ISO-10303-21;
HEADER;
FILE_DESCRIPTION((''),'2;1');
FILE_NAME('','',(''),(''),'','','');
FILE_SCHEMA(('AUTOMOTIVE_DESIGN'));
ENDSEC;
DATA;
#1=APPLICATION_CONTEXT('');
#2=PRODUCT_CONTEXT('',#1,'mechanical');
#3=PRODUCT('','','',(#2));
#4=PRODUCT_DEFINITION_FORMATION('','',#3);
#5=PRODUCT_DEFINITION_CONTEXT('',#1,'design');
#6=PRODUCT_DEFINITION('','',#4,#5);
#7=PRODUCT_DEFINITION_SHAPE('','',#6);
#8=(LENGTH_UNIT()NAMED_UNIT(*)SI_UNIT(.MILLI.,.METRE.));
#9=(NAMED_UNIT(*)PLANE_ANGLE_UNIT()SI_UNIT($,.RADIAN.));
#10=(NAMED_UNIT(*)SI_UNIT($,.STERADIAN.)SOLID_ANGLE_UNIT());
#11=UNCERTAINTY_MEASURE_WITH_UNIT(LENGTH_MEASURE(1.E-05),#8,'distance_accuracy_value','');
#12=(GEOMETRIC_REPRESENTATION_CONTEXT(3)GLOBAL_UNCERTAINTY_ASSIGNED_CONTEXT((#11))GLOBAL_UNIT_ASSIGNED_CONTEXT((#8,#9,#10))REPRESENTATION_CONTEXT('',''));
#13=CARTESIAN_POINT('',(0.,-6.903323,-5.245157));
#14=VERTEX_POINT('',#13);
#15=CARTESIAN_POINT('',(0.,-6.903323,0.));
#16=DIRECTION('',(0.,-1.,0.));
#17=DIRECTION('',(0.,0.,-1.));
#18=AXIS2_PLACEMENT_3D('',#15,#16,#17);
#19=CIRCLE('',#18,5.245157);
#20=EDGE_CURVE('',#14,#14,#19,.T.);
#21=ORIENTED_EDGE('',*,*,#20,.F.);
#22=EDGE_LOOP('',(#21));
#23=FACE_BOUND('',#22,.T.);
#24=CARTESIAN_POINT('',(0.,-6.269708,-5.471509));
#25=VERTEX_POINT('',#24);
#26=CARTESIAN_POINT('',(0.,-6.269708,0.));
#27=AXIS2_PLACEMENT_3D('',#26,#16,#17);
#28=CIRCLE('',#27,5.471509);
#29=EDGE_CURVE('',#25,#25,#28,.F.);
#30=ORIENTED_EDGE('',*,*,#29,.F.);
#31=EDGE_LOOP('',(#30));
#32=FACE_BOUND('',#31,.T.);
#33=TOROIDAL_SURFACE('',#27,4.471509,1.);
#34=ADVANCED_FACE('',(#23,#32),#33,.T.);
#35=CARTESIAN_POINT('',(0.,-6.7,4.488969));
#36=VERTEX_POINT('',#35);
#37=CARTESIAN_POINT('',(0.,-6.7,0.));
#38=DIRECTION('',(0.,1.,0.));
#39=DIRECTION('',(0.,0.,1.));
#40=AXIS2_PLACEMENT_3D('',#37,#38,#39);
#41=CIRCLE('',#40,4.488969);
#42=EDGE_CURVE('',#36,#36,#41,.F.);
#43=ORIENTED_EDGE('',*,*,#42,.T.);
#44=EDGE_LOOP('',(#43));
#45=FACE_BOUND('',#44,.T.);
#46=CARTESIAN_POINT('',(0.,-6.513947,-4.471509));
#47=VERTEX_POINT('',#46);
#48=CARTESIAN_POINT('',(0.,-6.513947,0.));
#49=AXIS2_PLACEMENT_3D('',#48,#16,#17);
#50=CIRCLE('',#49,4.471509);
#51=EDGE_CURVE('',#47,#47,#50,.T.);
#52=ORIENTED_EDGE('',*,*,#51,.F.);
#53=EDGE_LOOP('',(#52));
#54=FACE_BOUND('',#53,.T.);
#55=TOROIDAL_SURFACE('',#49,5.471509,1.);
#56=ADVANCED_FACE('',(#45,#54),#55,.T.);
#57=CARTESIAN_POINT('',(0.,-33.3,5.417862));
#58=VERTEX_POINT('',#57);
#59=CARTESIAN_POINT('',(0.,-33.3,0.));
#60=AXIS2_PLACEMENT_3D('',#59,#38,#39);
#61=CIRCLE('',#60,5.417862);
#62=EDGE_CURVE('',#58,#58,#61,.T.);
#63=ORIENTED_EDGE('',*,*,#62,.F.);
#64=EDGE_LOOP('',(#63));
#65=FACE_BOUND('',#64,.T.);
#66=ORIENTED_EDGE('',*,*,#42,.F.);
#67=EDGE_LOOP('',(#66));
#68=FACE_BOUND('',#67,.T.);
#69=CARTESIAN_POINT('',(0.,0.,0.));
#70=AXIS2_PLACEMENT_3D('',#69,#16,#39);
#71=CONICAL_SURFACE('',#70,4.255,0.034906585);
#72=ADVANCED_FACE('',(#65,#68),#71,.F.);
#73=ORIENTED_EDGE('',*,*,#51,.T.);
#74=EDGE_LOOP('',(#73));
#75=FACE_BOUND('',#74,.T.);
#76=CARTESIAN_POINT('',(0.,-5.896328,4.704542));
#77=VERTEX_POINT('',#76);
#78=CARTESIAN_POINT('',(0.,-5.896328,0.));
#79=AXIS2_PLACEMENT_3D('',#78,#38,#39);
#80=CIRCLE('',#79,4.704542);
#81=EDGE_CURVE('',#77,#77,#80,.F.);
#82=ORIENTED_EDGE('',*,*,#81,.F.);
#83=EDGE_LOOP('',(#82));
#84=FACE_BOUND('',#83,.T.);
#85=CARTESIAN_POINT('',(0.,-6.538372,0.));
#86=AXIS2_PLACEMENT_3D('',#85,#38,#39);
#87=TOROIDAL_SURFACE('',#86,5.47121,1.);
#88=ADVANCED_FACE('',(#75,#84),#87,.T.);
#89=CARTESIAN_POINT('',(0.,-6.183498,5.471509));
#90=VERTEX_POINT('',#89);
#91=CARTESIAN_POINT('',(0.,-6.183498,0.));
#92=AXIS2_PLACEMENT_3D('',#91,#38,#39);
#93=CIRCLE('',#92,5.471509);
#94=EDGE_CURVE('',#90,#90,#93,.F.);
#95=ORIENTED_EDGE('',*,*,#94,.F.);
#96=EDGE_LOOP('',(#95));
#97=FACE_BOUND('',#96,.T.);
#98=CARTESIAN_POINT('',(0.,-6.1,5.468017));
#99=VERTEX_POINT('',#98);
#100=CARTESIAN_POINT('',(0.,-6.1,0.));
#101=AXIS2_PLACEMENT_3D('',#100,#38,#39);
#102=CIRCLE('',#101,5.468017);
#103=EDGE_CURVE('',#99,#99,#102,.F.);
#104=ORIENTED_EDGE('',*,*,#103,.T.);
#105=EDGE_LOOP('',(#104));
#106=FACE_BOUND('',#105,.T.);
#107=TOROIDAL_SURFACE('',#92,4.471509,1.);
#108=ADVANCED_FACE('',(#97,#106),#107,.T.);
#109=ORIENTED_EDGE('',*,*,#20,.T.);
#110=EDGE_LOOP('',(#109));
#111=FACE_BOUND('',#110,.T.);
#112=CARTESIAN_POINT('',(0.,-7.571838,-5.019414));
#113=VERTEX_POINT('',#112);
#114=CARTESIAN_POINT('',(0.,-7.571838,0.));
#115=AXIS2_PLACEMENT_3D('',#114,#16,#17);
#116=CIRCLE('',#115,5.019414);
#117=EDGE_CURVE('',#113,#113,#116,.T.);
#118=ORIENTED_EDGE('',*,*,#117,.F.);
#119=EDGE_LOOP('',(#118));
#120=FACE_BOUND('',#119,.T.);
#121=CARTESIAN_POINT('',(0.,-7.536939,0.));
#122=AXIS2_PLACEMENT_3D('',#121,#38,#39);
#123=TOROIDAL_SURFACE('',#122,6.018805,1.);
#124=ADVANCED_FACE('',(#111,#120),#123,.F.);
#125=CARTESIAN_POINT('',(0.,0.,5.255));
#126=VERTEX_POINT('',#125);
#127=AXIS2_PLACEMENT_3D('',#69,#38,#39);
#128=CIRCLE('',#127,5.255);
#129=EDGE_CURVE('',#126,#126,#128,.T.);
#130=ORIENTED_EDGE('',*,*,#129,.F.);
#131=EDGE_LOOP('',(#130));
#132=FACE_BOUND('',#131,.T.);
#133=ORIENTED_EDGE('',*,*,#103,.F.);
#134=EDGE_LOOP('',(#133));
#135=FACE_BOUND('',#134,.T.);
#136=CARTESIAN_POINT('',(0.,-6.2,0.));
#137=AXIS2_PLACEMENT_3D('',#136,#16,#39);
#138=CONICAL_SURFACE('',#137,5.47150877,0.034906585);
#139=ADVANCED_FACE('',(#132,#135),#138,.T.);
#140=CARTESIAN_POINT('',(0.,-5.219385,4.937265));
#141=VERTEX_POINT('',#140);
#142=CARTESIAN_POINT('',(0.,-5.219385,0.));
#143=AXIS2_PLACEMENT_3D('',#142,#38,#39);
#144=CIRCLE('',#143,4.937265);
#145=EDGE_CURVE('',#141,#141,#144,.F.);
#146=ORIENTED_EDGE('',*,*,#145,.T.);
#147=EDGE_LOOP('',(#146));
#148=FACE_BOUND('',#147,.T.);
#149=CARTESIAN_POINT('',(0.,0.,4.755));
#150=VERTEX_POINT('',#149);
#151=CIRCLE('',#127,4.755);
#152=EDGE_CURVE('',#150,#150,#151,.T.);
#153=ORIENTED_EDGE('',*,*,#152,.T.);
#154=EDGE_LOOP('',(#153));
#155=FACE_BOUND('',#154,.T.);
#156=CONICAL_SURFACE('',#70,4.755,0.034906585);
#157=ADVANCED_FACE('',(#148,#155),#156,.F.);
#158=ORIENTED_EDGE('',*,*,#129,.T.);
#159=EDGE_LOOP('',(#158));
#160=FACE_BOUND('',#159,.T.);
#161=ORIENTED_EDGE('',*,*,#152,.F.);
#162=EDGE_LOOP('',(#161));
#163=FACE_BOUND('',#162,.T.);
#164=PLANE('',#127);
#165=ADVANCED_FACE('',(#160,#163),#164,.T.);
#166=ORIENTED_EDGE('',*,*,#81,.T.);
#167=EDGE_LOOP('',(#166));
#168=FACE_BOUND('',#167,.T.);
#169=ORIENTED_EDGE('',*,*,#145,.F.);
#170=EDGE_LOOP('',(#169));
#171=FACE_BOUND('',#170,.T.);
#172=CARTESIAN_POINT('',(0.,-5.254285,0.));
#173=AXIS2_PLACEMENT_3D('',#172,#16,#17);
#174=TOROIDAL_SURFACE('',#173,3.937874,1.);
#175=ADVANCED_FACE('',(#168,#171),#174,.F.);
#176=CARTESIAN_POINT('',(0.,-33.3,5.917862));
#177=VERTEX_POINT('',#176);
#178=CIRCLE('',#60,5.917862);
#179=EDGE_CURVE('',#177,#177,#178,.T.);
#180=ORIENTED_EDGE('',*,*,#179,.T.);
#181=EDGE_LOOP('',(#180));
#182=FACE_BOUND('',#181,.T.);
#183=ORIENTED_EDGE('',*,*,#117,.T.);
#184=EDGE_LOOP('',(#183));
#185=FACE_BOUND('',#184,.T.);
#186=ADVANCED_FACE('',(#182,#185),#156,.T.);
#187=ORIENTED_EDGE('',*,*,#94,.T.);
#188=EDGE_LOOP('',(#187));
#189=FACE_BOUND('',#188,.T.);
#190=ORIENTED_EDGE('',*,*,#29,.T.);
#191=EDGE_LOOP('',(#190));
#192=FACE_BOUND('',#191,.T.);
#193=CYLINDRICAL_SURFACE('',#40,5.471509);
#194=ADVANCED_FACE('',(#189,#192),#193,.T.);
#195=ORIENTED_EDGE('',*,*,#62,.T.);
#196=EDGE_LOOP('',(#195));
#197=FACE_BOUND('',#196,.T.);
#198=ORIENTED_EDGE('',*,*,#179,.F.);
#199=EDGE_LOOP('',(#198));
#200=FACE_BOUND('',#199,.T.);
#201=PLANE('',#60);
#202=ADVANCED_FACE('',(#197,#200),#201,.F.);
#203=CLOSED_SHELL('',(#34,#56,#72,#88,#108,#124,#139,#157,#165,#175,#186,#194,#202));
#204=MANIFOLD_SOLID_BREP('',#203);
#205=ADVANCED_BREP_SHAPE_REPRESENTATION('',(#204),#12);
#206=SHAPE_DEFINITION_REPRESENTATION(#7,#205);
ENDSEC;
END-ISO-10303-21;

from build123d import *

# Parameters (mm, degrees)
SKETCH1_R                = 4.755
BOSS_EXTRUDE1_DEPTH      = 33.3
BOSS_EXTRUDE1_DRAFT      = 2.000000000000002
SKETCH2_R                = 4.255
CUT_EXTRUDE1_DEPTH       = 33.3
CUT_EXTRUDE1_DRAFT       = 2.000000000000002
SKETCH3_R                = 7.292967388121313
CUT_EXTRUDE2_DEPTH       = 6.2
SKETCH4_R                = 5.47150877
BOSS_EXTRUDE2_DEPTH      = 6.2
BOSS_EXTRUDE2_TAPER      = 2.000000000000002
SKETCH5_R                = 4.755000000000001
CUT_EXTRUDE3_DEPTH       = 6.2
CUT_EXTRUDE3_DRAFT       = 2.000000000000002
BOSS_EXTRUDE3_DEPTH      = 0.1
BOSS_EXTRUDE3_DEPTH_BACK = 0.5
SKETCH8_R                = 5.47150877
SKETCH8_R_2              = 4.471508770848837
FILLET3_R                = 1
FILLET4_R                = 1
FILLET5_R                = 1
FILLET6_R                = 1
FILLET7_R                = 1


with BuildPart() as part:
    # Sketch1 → Boss-Extrude1 (with draft: the straight prism first)
    with BuildSketch(Plane(origin=(0, 0, 0), x_dir=(1, 0, 0), z_dir=(0, 1, 0))):
        Circle(SKETCH1_R)
    extrude(amount=-BOSS_EXTRUDE1_DEPTH)
    # Boss-Extrude1: the draft: its side faces are tilted about the plane it starts from
    boss_extrude1_sides = [part.faces().sort_by_distance(p)[0] for p in [
        (-4.755, -16.65, 0),
    ]]
    draft(boss_extrude1_sides, Plane(origin=(0, 0, 0), x_dir=(1, 0, 0), z_dir=(0, 1, 0)), BOSS_EXTRUDE1_DRAFT)


with BuildPart() as cut_extrude1_tool:
    # Sketch2 → Cut-Extrude1 (with draft: the straight prism first)
    with BuildSketch(Plane(origin=(0, 0, 0), x_dir=(1, 0, 0), z_dir=(0, 1, 0))):
        Circle(SKETCH2_R)
    extrude(amount=-CUT_EXTRUDE1_DEPTH)
    # Cut-Extrude1: the draft: its side faces are tilted about the plane it starts from
    cut_extrude1_sides = [cut_extrude1_tool.faces().sort_by_distance(p)[0] for p in [
        (-4.255, -16.65, 0),
    ]]
    draft(cut_extrude1_sides, Plane(origin=(0, 0, 0), x_dir=(1, 0, 0), z_dir=(0, 1, 0)), CUT_EXTRUDE1_DRAFT)


with BuildPart() as part_1:
    add(part.part)

    # Cut-Extrude1: cut by cut_extrude1_tool
    add(cut_extrude1_tool.part, mode=Mode.SUBTRACT)

    # Sketch3 → Cut-Extrude2 (cut)
    with BuildSketch(Plane(origin=(0, 0, 0), x_dir=(1, 0, 0), z_dir=(0, 1, 0))):
        Circle(SKETCH3_R)
    extrude(amount=-CUT_EXTRUDE2_DEPTH, mode=Mode.SUBTRACT)

    # Sketch4 → Boss-Extrude2 (add)
    with BuildSketch(Plane(origin=(0, -6.2, 0), x_dir=(1, 0, 0), z_dir=(0, 1, 0))):
        Circle(SKETCH4_R)
    extrude(amount=BOSS_EXTRUDE2_DEPTH, taper=BOSS_EXTRUDE2_TAPER)


with BuildPart() as cut_extrude3_tool:
    # Sketch5 → Cut-Extrude3 (with draft: the straight prism first)
    with BuildSketch(Plane(origin=(0, 0, 0), x_dir=(1, 0, 0), z_dir=(0, 1, 0))):
        Circle(SKETCH5_R)
    extrude(amount=-CUT_EXTRUDE3_DEPTH)
    # Cut-Extrude3: the draft: its side faces are tilted about the plane it starts from
    cut_extrude3_sides = [cut_extrude3_tool.faces().sort_by_distance(p)[0] for p in [
        (-4.755, -3.1, 0),
    ]]
    draft(cut_extrude3_sides, Plane(origin=(0, 0, 0), x_dir=(1, 0, 0), z_dir=(0, 1, 0)), CUT_EXTRUDE3_DRAFT)


with BuildPart() as part_2:
    add(part_1.part)

    # Cut-Extrude3: cut by cut_extrude3_tool
    add(cut_extrude3_tool.part, mode=Mode.SUBTRACT)


with BuildPart() as cut_extrude3_piece_1:
    # of the separate pieces the step leaves, piece 1, a body of its own (cut_extrude3_pieces)
    add(part_2.part.solids().sort_by_distance((5.917861624, -33.3, 0))[0])



with BuildPart() as cut_extrude3_piece_2:
    # of the separate pieces the step leaves, piece 2, a body of its own (cut_extrude3_pieces)
    add(part_2.part.solids().sort_by_distance((5.47150877, -6.2, 0))[0])


with BuildPart() as cut_extrude3_piece_1_1:
    add(cut_extrude3_piece_1.part)

    add(cut_extrude3_piece_2.part)  # Boss-Extrude3 merges Cut-Extrude3 piece 2
    # Sketch8 → Boss-Extrude3 (add, two sides: drawn at the far end of the back side and taken through both)
    with BuildSketch(Plane(origin=(0, -6.2, 0), x_dir=(1, 0, 0), z_dir=(0, 1, 0)).offset(-BOSS_EXTRUDE3_DEPTH_BACK)):
        with Locations(Location((0, 0, 0), (0, 0, 270))):
            Circle(SKETCH8_R)
        with Locations(Location((0, 0, 0), (0, 0, 270))):
            Circle(SKETCH8_R_2, mode=Mode.SUBTRACT)
    extrude(amount=BOSS_EXTRUDE3_DEPTH + BOSS_EXTRUDE3_DEPTH_BACK)

    # Fillet3
    # the kernel refuses this fillet: 1 mm, written as the material it takes off along each edge
    with BuildSketch(Plane(origin=(0, -6.7, 0), x_dir=(-1.8e-16, 0, 1), z_dir=(-1, 0, -1.8e-16))) as fillet3_piece_1:
        with BuildLine():
            CenterArc((5.471508770848837, 0.18605349890898903), FILLET3_R, 180, 10.722559871321096)
            Line((4.488969155594713, 0), (4.471508770848837, 0))
            Line((4.471508770848837, 0), (4.471508770848837, 0.18605349890898903))
        make_face()
    revolve(axis=Axis((0, -6.7, 0), (0, 1, 0)), mode=Mode.SUBTRACT)

    # Fillet4
    # the kernel refuses this fillet: 1 mm, written as the material it adds along each edge
    with BuildSketch(Plane(origin=(0, -6.1000000000000005, 0), x_dir=(1, 0, 0), z_dir=(0, 0, 1))) as fillet4_piece_1:
        with BuildLine():
            CenterArc((3.9378741267887936, 0.8457151214558971), FILLET4_R, 302.2513636377463, 59.748636362253706)
            Line((4.47150877084877, 1.0658e-13), (4.482181463729969, -0.01691430242900882))
            ThreePointArc((4.482181463729969, -0.01691430242900882), (4.719762732374216, -0.01999999999999957), (4.968016693899662, -0.01999999999999957))
            Line((4.968016693899662, -0.01999999999999957), (4.988004510440043, 0.00069798993405001))
            Line((4.988004510440043, 0.00069798993405001), (4.957252770348271, 0.8813126080924478))
            Line((4.957252770348271, 0.8813126080924478), (4.937264953807889, 0.8806146181583978))
        make_face()
    revolve(axis=Axis((0, -6.1000000000000005, 0), (0, 1, 0)))

    # Fillet5
    # the kernel refuses this fillet: 1 mm, written as the material it takes off along each edge
    with BuildSketch(Plane(origin=(0, -6.1000000000000005, 0), x_dir=(-1.8e-16, 0, 1), z_dir=(-1, 0, -1.8e-16))) as fillet5_piece_1:
        with BuildLine():
            CenterArc((5.4715087708488035, -0.4380156830897022), FILLET5_R, 140.06894109758144, 39.931058902420205)
            Line((4.471508770848803, -0.4380156830897315), (4.471508770848837, 0))
            ThreePointArc((4.471508770848837, 0), (4.5960401438617255, 0.09284229423308599), (4.704691448818901, 0.20384971918314942))
        make_face()
    revolve(axis=Axis((0, -6.1000000000000005, 0), (0, 1, 0)), revolution_arc=90.00000000000001, mode=Mode.SUBTRACT)
    with BuildSketch(Plane(origin=(0, -6.1000000000000005, 0), x_dir=(1, 0, 2e-17), z_dir=(-2e-17, 0, 1))) as fillet5_piece_2:
        with BuildLine():
            CenterArc((5.4715087708488035, -0.4380156830897022), FILLET5_R, 140.06894109758142, 39.931058902420205)
            Line((4.4715087708488035, -0.4380156830897306), (4.471508770848837, 0))
            ThreePointArc((4.471508770848837, 0), (4.596040143861726, 0.09284229423308688), (4.7046914488189016, 0.20384971918314942))
        make_face()
    revolve(axis=Axis((0, -6.1000000000000005, 0), (0, 1, 0)), revolution_arc=270, mode=Mode.SUBTRACT)

    # Fillet6
    # the kernel refuses this fillet: 1 mm, written as the material it adds along each edge
    with BuildSketch(Plane(origin=(0, -6.7, 0), x_dir=(1, 0, 0), z_dir=(0, 0, 1))) as fillet6_piece_1:
        with BuildLine():
            CenterArc((6.018805247042198, -0.8369388067342642), FILLET6_R, 123.18173696935794, 58.818263030642015)
            Line((5.019414420023102, -0.8718383034367649), (4.99942660348272, -0.872536293370815))
            Line((4.99942660348272, -0.872536293370815), (4.968981339054329, -0.00069798993405001))
            Line((4.968981339054329, -0.00069798993405001), (4.98896915559471, 0.01999999999999957))
            ThreePointArc((4.98896915559471, 0.01999999999999957), (5.230238962797434, 0.01999999999999957), (5.460562840459316, 0.01673877613443953))
            Line((5.460562840459316, 0.01673877613443953), (5.471508770000157, -2.407e-13))
        make_face()
    revolve(axis=Axis((0, -6.7, 0), (0, 1, 0)))

    # Fillet7
    # the kernel refuses this fillet: 1 mm, written as the material it takes off along each edge
    with BuildSketch(Plane(origin=(0, -6.7, 0), x_dir=(-1.8e-16, 0, 1), z_dir=(-1, 0, -1.8e-16))) as fillet7_piece_1:
        with BuildLine():
            CenterArc((4.471508770000036, 0.4302918795001718), FILLET7_R, 320.68263745440794, 39.31736254559383)
            Line((5.471508770000037, 0.43029187950020287), (5.47150877, 0))
            ThreePointArc((5.47150877, 0), (5.350554662973599, -0.09300254811217279), (5.245157008521018, -0.2033234636169139))
        make_face()
    revolve(axis=Axis((0, -6.7, 0), (0, 1, 0)), revolution_arc=90.00000000000001, mode=Mode.SUBTRACT)
    with BuildSketch(Plane(origin=(0, -6.1000000000000005, 0), x_dir=(-1.8e-16, 0, 1), z_dir=(-1, 0, -1.8e-16))) as fillet7_piece_2:
        with BuildLine():
            CenterArc((4.47150877, -0.08349825924513077), FILLET7_R, 0, 4.789674454393566)
            Line((5.468016693050807, -1.78e-15), (5.47150877, 0))
            Line((5.47150877, 0), (5.47150877, -0.08349825924513077))
        make_face()
    revolve(axis=Axis((0, -6.1000000000000005, 0), (0, 1, 0)), mode=Mode.SUBTRACT)
    with BuildSketch(Plane(origin=(0, -6.7, 0), x_dir=(1, 0, 2e-17), z_dir=(-2e-17, 0, 1))) as fillet7_piece_3:
        with BuildLine():
            CenterArc((4.471508770000037, 0.43029187950017356), FILLET7_R, 320.6826374544079, 39.317362545594)
            Line((5.471508770000037, 0.4302918795002064), (5.47150877, 0))
            ThreePointArc((5.47150877, 0), (5.3505546629736, -0.0930025481121719), (5.245157008521018, -0.203323463616913))
        make_face()
    revolve(axis=Axis((0, -6.7, 0), (0, 1, 0)), revolution_arc=270, mode=Mode.SUBTRACT)


solid = cut_extrude3_piece_1_1.part
